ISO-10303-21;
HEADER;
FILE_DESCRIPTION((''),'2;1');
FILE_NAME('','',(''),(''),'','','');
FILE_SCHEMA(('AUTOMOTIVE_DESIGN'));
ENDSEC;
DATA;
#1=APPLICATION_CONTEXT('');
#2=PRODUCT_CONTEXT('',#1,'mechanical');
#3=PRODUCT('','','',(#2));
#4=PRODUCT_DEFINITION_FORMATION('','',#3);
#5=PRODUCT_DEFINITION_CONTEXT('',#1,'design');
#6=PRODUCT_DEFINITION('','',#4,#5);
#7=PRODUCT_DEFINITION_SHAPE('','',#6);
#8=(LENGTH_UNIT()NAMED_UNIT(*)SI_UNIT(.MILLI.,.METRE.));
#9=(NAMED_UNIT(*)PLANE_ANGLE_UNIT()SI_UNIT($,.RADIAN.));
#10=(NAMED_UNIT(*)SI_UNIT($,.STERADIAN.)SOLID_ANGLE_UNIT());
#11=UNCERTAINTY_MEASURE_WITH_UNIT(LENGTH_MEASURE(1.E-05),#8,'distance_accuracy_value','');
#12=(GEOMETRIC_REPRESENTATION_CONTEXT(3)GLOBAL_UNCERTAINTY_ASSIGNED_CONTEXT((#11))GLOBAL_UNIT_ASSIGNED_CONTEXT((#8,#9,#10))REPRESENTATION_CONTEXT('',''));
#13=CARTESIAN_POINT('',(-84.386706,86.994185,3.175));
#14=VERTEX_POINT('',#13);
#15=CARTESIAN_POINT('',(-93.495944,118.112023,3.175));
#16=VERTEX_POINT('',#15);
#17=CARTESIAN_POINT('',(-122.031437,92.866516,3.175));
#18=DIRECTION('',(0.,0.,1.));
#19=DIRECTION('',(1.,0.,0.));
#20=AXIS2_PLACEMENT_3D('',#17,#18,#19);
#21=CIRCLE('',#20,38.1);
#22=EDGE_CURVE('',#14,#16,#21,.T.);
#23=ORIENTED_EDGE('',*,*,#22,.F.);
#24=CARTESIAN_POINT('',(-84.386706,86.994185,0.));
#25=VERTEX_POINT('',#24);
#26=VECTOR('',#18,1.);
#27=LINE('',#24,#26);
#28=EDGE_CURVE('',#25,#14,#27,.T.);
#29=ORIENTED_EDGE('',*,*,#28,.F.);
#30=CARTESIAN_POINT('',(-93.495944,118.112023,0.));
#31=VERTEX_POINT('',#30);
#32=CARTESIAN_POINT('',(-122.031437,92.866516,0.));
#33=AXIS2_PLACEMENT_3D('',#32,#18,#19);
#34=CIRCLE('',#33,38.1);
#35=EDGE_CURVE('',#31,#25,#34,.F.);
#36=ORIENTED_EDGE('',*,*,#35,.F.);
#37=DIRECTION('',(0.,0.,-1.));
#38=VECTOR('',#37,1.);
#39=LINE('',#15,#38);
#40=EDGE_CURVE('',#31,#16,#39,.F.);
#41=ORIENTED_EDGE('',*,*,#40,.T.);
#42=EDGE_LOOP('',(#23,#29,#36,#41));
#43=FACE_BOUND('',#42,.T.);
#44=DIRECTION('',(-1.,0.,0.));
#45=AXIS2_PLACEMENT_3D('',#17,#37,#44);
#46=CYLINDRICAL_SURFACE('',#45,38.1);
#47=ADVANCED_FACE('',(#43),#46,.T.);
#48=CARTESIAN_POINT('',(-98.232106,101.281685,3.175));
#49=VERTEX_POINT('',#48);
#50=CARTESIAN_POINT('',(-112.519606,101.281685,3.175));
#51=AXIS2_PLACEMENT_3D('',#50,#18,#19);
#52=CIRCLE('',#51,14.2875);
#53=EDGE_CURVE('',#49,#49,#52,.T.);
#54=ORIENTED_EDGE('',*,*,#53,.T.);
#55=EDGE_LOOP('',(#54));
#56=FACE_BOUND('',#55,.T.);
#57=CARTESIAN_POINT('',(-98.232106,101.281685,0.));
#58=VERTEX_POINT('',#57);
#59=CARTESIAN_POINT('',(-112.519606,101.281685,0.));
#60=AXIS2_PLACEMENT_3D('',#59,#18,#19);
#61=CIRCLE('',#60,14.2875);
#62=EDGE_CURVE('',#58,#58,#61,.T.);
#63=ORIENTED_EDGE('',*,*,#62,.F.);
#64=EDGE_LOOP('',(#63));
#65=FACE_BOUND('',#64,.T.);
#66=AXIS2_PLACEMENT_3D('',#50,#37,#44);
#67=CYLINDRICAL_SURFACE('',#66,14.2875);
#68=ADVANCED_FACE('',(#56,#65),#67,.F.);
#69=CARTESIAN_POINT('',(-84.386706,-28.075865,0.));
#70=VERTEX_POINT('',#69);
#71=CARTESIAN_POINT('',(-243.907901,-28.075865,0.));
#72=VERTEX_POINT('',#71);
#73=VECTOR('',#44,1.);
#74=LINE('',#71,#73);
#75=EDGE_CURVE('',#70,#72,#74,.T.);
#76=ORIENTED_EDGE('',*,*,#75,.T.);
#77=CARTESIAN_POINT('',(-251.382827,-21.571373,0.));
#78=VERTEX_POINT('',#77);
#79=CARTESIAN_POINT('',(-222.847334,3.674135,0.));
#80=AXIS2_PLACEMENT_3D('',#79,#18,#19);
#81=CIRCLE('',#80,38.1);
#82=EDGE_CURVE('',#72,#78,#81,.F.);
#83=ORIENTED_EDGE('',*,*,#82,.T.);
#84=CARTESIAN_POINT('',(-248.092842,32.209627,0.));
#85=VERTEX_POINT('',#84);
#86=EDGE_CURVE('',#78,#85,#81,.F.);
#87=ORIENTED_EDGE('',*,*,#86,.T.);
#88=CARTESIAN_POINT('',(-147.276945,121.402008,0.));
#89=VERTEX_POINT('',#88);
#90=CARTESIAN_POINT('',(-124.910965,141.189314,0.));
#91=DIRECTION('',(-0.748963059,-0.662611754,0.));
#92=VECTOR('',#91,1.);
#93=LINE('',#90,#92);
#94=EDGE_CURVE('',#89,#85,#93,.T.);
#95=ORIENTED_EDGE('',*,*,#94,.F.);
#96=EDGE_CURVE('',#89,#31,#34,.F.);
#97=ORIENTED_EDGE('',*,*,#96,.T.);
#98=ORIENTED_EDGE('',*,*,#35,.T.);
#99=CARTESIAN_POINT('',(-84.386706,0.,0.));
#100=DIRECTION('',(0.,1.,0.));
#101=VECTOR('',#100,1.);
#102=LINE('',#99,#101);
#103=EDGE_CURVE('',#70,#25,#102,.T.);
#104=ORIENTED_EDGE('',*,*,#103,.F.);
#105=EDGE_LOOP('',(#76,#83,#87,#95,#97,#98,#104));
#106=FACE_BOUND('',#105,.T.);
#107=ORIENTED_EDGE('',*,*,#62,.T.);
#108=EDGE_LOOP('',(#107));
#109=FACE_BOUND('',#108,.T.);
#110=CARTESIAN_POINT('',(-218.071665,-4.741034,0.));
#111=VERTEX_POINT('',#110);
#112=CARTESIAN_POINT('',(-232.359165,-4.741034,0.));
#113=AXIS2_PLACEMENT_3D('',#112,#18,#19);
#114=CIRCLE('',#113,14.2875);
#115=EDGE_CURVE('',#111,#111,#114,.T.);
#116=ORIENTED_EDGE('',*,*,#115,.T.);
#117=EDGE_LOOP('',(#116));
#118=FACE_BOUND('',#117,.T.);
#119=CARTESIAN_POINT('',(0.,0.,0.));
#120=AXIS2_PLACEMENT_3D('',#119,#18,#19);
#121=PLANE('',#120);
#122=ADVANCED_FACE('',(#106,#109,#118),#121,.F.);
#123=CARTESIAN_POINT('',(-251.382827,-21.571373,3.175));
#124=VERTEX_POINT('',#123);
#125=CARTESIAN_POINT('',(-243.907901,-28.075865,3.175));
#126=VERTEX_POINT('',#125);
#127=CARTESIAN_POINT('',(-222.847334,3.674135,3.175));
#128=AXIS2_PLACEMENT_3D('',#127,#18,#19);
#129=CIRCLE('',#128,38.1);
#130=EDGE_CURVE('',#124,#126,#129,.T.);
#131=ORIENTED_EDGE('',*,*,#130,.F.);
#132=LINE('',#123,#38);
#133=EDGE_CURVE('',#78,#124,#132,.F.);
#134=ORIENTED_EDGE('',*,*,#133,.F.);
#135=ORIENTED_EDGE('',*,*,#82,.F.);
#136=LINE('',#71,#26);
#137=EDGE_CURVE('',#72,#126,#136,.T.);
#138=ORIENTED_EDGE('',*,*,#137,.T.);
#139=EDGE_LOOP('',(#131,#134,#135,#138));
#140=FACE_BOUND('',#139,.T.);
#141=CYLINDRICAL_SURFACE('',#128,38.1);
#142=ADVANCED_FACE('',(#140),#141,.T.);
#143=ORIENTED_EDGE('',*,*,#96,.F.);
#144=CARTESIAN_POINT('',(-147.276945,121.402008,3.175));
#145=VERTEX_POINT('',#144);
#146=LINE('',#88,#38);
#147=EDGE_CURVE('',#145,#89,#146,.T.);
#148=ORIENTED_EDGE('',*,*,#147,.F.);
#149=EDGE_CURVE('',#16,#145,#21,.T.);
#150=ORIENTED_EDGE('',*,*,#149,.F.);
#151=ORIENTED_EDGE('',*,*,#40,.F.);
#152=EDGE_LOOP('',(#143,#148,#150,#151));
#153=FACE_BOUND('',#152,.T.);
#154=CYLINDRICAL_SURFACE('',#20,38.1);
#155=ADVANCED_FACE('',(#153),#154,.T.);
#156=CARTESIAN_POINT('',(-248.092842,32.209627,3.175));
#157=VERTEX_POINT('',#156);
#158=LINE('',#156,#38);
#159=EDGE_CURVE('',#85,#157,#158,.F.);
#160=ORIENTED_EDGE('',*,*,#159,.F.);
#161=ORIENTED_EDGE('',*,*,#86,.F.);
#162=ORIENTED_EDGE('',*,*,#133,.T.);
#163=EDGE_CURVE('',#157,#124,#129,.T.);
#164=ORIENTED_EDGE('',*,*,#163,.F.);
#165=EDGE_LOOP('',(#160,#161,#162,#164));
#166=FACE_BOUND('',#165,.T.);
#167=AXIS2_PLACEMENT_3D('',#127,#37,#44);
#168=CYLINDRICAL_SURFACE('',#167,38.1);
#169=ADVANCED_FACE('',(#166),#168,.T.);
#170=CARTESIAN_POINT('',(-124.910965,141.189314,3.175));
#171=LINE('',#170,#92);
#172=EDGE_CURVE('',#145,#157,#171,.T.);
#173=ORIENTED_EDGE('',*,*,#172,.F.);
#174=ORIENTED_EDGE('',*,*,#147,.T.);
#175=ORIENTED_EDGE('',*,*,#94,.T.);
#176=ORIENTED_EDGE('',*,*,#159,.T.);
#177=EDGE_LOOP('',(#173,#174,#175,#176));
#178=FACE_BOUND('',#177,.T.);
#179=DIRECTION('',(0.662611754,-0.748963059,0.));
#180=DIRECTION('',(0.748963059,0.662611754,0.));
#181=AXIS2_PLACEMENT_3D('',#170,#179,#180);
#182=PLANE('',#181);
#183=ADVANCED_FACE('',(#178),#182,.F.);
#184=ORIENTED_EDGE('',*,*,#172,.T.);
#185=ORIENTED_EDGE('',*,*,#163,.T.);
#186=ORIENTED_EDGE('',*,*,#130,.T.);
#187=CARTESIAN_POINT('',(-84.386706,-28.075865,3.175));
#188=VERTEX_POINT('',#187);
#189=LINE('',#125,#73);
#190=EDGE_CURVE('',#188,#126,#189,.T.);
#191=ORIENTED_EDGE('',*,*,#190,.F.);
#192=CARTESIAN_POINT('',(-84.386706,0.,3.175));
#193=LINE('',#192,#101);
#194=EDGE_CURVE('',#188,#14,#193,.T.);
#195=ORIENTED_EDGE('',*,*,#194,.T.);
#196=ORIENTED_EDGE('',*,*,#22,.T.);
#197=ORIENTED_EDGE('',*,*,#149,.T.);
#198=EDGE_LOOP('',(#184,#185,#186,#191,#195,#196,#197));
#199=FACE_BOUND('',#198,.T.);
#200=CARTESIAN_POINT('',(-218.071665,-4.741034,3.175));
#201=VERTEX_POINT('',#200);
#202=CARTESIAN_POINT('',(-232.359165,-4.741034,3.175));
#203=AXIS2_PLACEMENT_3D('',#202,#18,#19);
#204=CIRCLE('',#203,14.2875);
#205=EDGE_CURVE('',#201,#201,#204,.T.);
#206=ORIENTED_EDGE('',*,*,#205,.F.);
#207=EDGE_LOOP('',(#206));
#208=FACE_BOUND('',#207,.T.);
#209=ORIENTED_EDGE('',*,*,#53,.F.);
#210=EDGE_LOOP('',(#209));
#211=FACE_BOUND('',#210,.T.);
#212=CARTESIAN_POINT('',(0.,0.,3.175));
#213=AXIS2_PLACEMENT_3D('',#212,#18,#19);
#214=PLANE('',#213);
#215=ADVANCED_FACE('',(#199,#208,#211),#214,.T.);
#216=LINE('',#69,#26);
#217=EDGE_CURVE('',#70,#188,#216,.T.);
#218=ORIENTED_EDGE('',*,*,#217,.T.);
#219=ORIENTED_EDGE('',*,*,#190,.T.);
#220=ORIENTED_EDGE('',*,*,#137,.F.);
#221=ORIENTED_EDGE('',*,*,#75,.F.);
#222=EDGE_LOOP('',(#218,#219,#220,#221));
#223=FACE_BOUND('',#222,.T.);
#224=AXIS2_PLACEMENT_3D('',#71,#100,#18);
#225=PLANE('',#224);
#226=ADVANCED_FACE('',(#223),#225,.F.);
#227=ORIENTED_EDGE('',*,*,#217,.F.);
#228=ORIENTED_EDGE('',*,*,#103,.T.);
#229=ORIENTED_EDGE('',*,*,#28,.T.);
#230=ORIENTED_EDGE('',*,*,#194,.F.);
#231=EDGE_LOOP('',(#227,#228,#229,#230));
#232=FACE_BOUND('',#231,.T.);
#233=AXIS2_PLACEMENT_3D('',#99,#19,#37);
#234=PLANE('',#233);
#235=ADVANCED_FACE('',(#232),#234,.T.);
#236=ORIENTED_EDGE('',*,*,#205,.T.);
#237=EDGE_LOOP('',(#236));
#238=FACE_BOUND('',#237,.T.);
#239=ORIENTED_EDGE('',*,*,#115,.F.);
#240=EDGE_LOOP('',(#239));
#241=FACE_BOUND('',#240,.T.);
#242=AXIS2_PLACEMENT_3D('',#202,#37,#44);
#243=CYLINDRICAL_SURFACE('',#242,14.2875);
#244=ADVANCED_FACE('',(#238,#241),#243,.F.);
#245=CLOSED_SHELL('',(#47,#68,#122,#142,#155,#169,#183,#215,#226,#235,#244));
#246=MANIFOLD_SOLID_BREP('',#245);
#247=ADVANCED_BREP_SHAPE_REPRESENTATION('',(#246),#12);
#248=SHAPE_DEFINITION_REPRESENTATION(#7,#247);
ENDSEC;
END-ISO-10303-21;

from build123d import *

# Parameters (mm, degrees)
BOSS_EXTRUDE1_DEPTH = 3.175
FILLET1_R           = 38.1
SKETCH2_W           = 42.672654426
SKETCH2_H           = 6.35
CUT_EXTRUDE1_DEPTH  = 3.175
BOSS_EXTRUDE2_DEPTH = 3.175


with BuildPart() as part:
    # Sketch1 → Boss-Extrude1 (new body)
    with BuildSketch(Plane.XY):
        with BuildLine():
            Line((-221.658355151, 4.726030951), (-123.220415709, 91.814619456))
            ThreePointArc((-123.220415709, 91.814619456), (-126.780447272, 102.154073831), (-121.98667143, 111.982494593))
            Line((-121.98667143, 111.982494593), (-137.765113811, 129.81717744))
            Line((-137.765113811, 129.81717744), (-257.60467267, 23.794458078))
            Line((-257.60467267, 23.794458078), (-241.826230288, 5.95977523))
            ThreePointArc((-241.826230288, 5.95977523), (-231.486775913, 9.519806794), (-221.658355151, 4.726030951))
        make_face()
        with BuildLine():
            Line((-207.113657049, -33.276527034), (-87.274098191, 72.746192329))
            Line((-87.274098191, 72.746192329), (-103.052540572, 90.580875176))
            ThreePointArc((-103.052540572, 90.580875176), (-113.391994947, 87.020843613), (-123.220415709, 91.814619456))
            Line((-123.220415709, 91.814619456), (-221.658355151, 4.726030951))
            ThreePointArc((-221.658355151, 4.726030951), (-218.998392521, 0.320824743), (-218.071664859, -4.741034478))
            ThreePointArc((-218.071664859, -4.741034478), (-219.332397157, -10.60925222), (-222.892099431, -15.441844187))
            Line((-222.892099431, -15.441844187), (-207.113657049, -33.276527034))
        make_face()
        with BuildLine():
            Line((-226.137318753, -50.106865574), (-207.113657049, -33.276527034))
            Line((-207.113657049, -33.276527034), (-222.892099431, -15.441844187))
            ThreePointArc((-222.892099431, -15.441844187), (-233.231553806, -19.00187575), (-243.059974568, -14.208099907))
            Line((-243.059974568, -14.208099907), (-251.382826563, -21.571373018))
            Line((-251.382826563, -21.571373018), (-226.137318753, -50.106865574))
        make_face()
        with BuildLine():
            Line((-251.382826563, -21.571373018), (-243.059974568, -14.208099907))
            ThreePointArc((-243.059974568, -14.208099907), (-246.620006131, -3.868645532), (-241.826230288, 5.95977523))
            Line((-241.826230288, 5.95977523), (-257.60467267, 23.794458078))
            Line((-257.60467267, 23.794458078), (-276.628334373, 6.964119538))
            Line((-276.628334373, 6.964119538), (-251.382826563, -21.571373018))
        make_face()
        with BuildLine():
            Line((-101.818796292, 110.748750313), (-93.495944297, 118.112023425))
            Line((-93.495944297, 118.112023425), (-118.741452107, 146.647515981))
            Line((-118.741452107, 146.647515981), (-137.765113811, 129.81717744))
            Line((-137.765113811, 129.81717744), (-121.98667143, 111.982494593))
            ThreePointArc((-121.98667143, 111.982494593), (-111.647217054, 115.542526156), (-101.818796292, 110.748750313))
        make_face()
        with BuildLine():
            Line((-103.052540572, 90.580875176), (-87.274098191, 72.746192329))
            Line((-87.274098191, 72.746192329), (-68.250436487, 89.576530869))
            Line((-68.250436487, 89.576530869), (-93.495944297, 118.112023425))
            Line((-93.495944297, 118.112023425), (-101.818796292, 110.748750313))
            ThreePointArc((-101.818796292, 110.748750313), (-99.158833662, 106.343544105), (-98.232106001, 101.281684885))
            ThreePointArc((-98.232106001, 101.281684885), (-99.492838298, 95.413467143), (-103.052540572, 90.580875176))
        make_face()
    extrude(amount=BOSS_EXTRUDE1_DEPTH)

    # Fillet1
    fillet1_edges = [part.edges().sort_by_distance(p)[0] for p in [
        (-276.628334373, 6.964119538, 1.5875),
        (-226.137318753, -50.106865574, 1.5875),
        (-68.250436487, 89.576530869, 1.5875),
        (-118.741452107, 146.647515981, 1.5875),
    ]]
    fillet(fillet1_edges, radius=FILLET1_R - 0.0001)  # a hair under: the kernel refuses the full size

    # Sketch2 → Cut-Extrude1 (cut)
    with BuildSketch(Plane.XY.offset(3.175)):
        with Locations((-222.571574213, -31.250865208)):
            Rectangle(SKETCH2_W, SKETCH2_H)
    extrude(amount=-CUT_EXTRUDE1_DEPTH, mode=Mode.SUBTRACT)


with BuildPart() as cut_extrude1_kept_piece:
    # of the separate pieces the step leaves, the one the design keeps (cut_extrude1_pieces_kept)
    add(part.part.solids().sort_by_distance((-251.382760302, -21.571447914, 0))[0])

    # Sketch3 → Boss-Extrude2 (add)
    with BuildSketch(Plane.XY.offset(3.175)):
        with BuildLine():
            Line((-84.386706387, -28.075865208), (-84.386706387, 86.994184885))
            ThreePointArc((-84.386706387, 86.994184885), (-88.606891327, 74.579641731), (-96.785929043, 64.331023059))
            Line((-96.785929043, 64.331023059), (-197.601826197, -24.861357764))
            ThreePointArc((-197.601826197, -24.861357764), (-199.63857671, -26.541152476), (-201.786766589, -28.075865208))
            Line((-201.786766589, -28.075865208), (-84.386706387, -28.075865208))
        make_face()
    extrude(amount=-BOSS_EXTRUDE2_DEPTH)


solid = cut_extrude1_kept_piece.part
